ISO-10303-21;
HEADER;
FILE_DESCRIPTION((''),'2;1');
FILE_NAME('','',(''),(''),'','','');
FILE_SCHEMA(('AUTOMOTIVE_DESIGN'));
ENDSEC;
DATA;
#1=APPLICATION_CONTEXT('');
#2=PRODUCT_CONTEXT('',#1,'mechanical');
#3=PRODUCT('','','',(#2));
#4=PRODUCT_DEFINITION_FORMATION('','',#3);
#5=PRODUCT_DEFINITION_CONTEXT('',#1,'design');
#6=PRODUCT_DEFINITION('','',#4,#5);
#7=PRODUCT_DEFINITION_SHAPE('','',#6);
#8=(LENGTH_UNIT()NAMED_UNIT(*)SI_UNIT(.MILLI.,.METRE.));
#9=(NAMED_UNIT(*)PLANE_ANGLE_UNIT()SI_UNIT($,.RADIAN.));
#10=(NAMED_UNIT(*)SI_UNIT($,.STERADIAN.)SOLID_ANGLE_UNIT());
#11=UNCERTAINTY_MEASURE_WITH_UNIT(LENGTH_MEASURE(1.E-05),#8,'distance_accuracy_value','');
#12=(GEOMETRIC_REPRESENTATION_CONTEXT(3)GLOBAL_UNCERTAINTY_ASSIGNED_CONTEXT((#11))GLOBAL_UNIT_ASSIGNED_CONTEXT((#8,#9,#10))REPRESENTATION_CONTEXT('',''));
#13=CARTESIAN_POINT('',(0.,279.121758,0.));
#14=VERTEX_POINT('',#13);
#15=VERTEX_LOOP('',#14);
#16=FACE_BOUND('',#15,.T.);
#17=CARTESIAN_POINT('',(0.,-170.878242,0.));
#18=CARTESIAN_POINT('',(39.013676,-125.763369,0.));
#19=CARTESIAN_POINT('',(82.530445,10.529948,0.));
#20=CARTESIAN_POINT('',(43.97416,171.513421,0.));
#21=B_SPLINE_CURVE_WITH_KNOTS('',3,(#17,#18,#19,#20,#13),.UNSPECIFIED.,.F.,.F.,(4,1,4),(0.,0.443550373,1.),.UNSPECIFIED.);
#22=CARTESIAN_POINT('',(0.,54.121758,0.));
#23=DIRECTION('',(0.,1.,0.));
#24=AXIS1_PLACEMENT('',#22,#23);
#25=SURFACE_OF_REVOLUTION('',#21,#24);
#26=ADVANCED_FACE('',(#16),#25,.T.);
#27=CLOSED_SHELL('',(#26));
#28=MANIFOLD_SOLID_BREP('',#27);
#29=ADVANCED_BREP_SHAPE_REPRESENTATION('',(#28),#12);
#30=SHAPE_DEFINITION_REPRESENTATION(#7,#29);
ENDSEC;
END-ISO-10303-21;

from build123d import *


with BuildPart() as f1:
    # F0 (on Top) → F1 (revolve)
    with BuildSketch(Plane.XY):
        with BuildLine():
            Line((0, 279.1217575701), (0, -170.8782424299))
            add(Edge.make_bspline(
                [(0, -170.8782424299), (39.0136756109, -125.7633686772), (82.5304449912, 10.5299481508), (43.9741604202, 171.5134214993), (0, 279.1217575701)],
                knots=[0, 0, 0, 0, 0.4435503729, 1, 1, 1, 1], degree=3))
        make_face()
    revolve(axis=Axis((0, 54.1217575701, 0), (0, 1, 0)))


solid = f1.part
